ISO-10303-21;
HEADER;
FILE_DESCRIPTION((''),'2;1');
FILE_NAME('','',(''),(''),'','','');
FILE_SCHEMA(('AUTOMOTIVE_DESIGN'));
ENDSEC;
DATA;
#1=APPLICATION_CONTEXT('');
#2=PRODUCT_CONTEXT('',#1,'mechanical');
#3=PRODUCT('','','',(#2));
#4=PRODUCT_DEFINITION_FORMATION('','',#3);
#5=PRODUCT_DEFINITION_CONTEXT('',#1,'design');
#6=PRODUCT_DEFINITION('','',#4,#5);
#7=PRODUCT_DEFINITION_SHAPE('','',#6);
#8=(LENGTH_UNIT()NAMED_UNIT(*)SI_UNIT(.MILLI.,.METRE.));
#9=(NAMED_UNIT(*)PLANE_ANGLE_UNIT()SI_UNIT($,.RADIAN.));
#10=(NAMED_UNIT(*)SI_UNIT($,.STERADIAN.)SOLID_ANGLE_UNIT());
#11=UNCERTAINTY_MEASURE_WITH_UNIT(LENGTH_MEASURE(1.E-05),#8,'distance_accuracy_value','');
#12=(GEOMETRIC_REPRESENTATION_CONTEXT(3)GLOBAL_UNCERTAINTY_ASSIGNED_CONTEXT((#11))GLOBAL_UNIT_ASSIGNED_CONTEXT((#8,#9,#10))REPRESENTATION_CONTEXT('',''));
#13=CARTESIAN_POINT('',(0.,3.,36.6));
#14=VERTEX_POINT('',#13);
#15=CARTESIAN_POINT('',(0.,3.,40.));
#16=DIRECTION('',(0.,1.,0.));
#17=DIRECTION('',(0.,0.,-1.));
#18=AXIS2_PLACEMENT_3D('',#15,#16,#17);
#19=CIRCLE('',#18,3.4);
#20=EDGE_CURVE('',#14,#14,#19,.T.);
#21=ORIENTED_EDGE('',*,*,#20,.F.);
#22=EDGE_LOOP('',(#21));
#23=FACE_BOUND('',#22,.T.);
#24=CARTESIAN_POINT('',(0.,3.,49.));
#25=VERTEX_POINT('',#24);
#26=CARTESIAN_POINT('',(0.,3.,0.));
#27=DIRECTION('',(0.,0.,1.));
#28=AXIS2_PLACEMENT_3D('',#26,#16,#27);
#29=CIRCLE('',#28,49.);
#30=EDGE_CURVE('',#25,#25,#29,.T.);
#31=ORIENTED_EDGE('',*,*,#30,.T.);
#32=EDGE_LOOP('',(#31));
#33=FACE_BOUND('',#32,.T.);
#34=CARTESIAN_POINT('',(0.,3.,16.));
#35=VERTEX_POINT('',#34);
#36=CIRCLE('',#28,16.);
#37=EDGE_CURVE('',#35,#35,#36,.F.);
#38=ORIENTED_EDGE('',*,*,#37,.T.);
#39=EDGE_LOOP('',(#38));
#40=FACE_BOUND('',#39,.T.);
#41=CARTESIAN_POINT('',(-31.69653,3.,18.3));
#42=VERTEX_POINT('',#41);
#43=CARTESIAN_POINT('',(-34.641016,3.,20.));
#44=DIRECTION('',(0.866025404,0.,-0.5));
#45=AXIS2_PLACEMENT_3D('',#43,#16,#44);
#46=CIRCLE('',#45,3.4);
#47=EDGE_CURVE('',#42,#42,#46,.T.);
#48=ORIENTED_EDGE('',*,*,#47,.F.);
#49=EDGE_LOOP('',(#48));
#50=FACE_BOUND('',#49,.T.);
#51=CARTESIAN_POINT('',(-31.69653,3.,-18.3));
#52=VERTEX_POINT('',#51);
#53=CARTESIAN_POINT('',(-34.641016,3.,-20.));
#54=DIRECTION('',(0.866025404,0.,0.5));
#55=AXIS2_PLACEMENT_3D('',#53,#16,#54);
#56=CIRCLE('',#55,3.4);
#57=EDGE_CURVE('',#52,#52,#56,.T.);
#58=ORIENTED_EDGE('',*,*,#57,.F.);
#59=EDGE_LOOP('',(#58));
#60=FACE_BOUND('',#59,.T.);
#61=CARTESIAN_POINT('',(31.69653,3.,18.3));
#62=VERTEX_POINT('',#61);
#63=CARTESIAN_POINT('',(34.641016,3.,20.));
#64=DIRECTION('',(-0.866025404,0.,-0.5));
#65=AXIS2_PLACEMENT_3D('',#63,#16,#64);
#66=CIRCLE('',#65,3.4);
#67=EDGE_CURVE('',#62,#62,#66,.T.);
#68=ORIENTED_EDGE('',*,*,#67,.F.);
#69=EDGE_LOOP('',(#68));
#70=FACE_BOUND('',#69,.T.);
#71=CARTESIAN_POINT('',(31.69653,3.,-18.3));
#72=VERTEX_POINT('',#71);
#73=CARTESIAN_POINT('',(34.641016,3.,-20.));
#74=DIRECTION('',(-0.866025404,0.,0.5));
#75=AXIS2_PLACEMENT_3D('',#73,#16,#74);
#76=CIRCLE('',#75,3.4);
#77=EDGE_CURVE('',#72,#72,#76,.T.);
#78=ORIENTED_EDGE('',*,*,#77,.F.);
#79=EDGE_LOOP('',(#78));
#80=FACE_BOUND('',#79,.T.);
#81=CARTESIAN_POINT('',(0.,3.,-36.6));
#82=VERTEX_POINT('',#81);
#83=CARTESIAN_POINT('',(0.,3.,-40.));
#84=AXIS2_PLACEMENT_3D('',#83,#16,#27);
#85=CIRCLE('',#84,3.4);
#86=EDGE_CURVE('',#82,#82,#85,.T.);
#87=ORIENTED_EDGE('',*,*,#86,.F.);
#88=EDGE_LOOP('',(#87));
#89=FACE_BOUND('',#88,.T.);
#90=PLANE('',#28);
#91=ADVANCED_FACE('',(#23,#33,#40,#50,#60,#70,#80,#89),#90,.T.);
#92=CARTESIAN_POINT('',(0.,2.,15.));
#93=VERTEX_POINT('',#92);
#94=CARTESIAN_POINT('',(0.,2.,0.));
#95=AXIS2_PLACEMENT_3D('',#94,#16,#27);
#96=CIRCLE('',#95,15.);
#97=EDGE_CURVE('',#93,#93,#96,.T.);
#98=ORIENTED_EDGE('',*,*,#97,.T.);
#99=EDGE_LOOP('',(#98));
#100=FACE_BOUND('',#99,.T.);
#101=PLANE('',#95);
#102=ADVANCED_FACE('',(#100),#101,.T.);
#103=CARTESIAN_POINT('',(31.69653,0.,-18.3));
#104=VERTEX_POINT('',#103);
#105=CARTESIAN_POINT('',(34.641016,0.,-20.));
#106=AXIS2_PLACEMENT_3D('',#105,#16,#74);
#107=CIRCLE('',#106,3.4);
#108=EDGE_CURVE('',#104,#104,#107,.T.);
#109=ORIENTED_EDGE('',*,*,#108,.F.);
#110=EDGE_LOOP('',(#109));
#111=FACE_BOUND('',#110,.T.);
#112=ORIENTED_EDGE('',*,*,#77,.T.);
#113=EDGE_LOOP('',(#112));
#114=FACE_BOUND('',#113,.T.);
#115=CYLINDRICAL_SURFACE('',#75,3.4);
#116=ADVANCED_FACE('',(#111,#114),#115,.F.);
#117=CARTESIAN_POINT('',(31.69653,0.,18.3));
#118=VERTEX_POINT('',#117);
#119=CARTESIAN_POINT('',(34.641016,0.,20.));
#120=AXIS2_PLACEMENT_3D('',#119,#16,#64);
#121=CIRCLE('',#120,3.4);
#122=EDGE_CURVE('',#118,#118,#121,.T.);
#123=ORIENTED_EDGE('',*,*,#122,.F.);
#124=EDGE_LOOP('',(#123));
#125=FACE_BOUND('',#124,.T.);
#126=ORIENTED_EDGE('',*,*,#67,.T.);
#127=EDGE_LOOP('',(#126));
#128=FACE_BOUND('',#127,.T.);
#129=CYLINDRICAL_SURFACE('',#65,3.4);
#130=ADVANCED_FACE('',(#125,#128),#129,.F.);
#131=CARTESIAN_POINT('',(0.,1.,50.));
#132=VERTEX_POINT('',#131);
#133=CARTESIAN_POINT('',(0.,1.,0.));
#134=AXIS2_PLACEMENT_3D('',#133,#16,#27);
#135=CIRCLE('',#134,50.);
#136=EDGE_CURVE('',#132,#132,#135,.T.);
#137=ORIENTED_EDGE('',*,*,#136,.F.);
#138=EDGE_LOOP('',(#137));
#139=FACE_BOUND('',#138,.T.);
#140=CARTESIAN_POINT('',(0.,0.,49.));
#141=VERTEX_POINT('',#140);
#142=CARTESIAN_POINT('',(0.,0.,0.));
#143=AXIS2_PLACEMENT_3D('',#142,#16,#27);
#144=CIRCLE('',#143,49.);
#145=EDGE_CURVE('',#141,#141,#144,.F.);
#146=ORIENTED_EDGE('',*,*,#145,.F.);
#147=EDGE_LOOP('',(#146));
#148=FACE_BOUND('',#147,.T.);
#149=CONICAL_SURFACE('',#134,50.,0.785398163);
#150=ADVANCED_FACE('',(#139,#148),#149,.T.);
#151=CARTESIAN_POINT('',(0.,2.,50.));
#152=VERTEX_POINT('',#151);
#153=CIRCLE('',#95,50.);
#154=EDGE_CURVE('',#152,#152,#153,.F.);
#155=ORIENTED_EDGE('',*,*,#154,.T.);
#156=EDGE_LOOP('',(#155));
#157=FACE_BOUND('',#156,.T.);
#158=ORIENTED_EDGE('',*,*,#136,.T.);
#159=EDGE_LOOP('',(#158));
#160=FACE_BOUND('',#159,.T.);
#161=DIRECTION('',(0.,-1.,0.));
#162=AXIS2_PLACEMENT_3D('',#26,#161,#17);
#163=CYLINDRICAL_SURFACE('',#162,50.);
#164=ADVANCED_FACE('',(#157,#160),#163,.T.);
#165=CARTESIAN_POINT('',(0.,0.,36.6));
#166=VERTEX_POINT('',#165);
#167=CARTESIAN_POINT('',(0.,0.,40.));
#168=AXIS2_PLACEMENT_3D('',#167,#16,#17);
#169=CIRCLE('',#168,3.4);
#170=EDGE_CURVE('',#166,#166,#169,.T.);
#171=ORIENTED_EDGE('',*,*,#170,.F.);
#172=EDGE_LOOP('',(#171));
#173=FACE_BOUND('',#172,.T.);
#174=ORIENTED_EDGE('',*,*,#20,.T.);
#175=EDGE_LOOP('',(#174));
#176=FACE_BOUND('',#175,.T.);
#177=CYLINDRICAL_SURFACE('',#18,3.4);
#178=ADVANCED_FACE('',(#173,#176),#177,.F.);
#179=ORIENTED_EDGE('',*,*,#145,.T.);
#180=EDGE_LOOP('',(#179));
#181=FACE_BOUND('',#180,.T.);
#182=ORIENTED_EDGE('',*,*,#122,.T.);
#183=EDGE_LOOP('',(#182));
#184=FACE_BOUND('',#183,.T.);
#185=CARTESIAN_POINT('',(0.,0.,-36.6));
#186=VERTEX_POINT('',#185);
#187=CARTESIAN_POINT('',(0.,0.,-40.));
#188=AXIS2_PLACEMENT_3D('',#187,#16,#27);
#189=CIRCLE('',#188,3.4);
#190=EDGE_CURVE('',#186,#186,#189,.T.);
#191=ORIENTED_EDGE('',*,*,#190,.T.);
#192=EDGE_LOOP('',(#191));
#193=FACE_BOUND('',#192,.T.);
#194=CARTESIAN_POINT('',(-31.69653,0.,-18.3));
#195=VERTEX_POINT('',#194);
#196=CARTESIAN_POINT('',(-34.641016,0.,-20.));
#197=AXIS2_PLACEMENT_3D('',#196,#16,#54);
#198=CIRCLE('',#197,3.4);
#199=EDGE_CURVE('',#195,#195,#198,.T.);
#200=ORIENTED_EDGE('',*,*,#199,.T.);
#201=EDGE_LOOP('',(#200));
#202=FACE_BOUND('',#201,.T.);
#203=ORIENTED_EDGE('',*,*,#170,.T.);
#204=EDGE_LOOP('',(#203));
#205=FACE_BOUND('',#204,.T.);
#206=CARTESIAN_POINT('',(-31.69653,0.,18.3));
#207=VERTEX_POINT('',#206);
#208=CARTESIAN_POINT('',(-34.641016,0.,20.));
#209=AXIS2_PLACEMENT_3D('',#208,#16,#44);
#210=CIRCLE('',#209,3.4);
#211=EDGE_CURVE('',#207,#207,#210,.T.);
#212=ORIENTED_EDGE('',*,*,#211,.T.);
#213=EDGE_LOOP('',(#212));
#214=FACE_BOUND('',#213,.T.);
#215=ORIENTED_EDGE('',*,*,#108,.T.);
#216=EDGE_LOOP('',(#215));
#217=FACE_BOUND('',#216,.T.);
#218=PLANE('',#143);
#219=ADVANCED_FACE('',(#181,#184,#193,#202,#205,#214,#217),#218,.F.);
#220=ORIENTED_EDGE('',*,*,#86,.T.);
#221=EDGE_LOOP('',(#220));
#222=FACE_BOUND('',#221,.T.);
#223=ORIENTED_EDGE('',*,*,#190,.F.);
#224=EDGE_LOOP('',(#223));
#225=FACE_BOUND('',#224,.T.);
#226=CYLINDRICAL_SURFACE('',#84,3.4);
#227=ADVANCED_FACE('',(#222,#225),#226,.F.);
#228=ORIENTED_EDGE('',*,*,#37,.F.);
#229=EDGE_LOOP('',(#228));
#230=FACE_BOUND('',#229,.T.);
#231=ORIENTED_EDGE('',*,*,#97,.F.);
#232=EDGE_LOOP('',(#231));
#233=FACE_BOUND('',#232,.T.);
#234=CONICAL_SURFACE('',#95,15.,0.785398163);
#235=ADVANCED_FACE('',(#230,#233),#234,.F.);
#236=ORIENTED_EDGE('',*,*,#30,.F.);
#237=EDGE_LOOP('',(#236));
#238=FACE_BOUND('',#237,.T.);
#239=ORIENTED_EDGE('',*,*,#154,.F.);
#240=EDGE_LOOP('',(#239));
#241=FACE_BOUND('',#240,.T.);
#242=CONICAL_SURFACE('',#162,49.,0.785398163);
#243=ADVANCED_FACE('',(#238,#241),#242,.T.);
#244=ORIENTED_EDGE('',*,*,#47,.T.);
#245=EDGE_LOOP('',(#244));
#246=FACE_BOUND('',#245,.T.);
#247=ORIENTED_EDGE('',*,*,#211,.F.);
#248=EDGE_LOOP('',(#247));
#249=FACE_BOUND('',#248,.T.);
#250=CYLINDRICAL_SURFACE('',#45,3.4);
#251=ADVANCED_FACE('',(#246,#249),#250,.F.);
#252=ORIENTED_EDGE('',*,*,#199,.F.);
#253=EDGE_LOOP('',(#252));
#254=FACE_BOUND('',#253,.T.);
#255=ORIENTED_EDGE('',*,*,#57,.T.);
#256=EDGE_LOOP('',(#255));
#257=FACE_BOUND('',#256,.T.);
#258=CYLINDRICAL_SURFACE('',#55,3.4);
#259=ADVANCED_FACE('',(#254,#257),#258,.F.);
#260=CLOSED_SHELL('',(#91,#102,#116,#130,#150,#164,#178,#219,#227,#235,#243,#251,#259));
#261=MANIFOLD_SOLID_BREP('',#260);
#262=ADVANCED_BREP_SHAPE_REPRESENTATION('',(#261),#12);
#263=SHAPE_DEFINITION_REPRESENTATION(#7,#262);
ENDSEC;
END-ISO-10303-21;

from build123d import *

# Parameters (mm, degrees)
SKETCH_1_R               = 50
EXTRUDE_1_DEPTH          = 3
PATTERN_CIRCULAR_1_COUNT = 6
SKETCH_5_R               = 15
CUT_EXTRUDE_1_DEPTH      = 1
CHAMFER_1_SIZE           = 1


with BuildPart() as part:
    # 草图1 → 凸台-拉伸1 (new body)
    with BuildSketch(Plane(origin=(0, 0, 0), x_dir=(1, 0, 0), z_dir=(0, 1, 0))):
        with Locations(Location((0, 0, 0), (0, 0, 270))):
            Circle(SKETCH_1_R)
    extrude(amount=EXTRUDE_1_DEPTH)

    # 草图4 → M8 螺纹孔的螺纹孔钻头1 (revolve, cut)
    with BuildSketch(Plane(origin=(0, 3, -40), x_dir=(0, 0, 1), z_dir=(1, 0, 0))):
        Polygon((0, 0), (0, 18.042926105), (3.4, 16), (3.4, 0), align=None)
    hole_wizard_m8_1 = revolve(axis=Axis((0, 9.35, -40), (0, -1, 0)), mode=Mode.SUBTRACT)

    # 阵列(圆周)1: M8 螺纹孔的螺纹孔钻头1 ×6 about axis
    pattern_circular_1_axis = Axis((0, 0, 0), (0, 1, 0))
    for i in range(1, PATTERN_CIRCULAR_1_COUNT):
        add(hole_wizard_m8_1.rotate(pattern_circular_1_axis, i * 360 / PATTERN_CIRCULAR_1_COUNT), mode=Mode.SUBTRACT)

    # 草图5 → 切除-拉伸1 (cut)
    with BuildSketch(Plane(origin=(0, 3, 0), x_dir=(1, 0, 0), z_dir=(0, 1, 0))):
        with Locations(Location((0, 0, 0), (0, 0, 270))):
            Circle(SKETCH_5_R)
    extrude(amount=-CUT_EXTRUDE_1_DEPTH, mode=Mode.SUBTRACT)

    # 倒角1
    chamfer_1_edges = [part.edges().sort_by_distance(p)[0] for p in [
        (0, 0, -50),
        (0, 3, -15),
        (0, 3, -50),
    ]]
    chamfer(chamfer_1_edges, length=CHAMFER_1_SIZE - 0.0001)  # a hair under: the kernel refuses the full size


solid = part.part
